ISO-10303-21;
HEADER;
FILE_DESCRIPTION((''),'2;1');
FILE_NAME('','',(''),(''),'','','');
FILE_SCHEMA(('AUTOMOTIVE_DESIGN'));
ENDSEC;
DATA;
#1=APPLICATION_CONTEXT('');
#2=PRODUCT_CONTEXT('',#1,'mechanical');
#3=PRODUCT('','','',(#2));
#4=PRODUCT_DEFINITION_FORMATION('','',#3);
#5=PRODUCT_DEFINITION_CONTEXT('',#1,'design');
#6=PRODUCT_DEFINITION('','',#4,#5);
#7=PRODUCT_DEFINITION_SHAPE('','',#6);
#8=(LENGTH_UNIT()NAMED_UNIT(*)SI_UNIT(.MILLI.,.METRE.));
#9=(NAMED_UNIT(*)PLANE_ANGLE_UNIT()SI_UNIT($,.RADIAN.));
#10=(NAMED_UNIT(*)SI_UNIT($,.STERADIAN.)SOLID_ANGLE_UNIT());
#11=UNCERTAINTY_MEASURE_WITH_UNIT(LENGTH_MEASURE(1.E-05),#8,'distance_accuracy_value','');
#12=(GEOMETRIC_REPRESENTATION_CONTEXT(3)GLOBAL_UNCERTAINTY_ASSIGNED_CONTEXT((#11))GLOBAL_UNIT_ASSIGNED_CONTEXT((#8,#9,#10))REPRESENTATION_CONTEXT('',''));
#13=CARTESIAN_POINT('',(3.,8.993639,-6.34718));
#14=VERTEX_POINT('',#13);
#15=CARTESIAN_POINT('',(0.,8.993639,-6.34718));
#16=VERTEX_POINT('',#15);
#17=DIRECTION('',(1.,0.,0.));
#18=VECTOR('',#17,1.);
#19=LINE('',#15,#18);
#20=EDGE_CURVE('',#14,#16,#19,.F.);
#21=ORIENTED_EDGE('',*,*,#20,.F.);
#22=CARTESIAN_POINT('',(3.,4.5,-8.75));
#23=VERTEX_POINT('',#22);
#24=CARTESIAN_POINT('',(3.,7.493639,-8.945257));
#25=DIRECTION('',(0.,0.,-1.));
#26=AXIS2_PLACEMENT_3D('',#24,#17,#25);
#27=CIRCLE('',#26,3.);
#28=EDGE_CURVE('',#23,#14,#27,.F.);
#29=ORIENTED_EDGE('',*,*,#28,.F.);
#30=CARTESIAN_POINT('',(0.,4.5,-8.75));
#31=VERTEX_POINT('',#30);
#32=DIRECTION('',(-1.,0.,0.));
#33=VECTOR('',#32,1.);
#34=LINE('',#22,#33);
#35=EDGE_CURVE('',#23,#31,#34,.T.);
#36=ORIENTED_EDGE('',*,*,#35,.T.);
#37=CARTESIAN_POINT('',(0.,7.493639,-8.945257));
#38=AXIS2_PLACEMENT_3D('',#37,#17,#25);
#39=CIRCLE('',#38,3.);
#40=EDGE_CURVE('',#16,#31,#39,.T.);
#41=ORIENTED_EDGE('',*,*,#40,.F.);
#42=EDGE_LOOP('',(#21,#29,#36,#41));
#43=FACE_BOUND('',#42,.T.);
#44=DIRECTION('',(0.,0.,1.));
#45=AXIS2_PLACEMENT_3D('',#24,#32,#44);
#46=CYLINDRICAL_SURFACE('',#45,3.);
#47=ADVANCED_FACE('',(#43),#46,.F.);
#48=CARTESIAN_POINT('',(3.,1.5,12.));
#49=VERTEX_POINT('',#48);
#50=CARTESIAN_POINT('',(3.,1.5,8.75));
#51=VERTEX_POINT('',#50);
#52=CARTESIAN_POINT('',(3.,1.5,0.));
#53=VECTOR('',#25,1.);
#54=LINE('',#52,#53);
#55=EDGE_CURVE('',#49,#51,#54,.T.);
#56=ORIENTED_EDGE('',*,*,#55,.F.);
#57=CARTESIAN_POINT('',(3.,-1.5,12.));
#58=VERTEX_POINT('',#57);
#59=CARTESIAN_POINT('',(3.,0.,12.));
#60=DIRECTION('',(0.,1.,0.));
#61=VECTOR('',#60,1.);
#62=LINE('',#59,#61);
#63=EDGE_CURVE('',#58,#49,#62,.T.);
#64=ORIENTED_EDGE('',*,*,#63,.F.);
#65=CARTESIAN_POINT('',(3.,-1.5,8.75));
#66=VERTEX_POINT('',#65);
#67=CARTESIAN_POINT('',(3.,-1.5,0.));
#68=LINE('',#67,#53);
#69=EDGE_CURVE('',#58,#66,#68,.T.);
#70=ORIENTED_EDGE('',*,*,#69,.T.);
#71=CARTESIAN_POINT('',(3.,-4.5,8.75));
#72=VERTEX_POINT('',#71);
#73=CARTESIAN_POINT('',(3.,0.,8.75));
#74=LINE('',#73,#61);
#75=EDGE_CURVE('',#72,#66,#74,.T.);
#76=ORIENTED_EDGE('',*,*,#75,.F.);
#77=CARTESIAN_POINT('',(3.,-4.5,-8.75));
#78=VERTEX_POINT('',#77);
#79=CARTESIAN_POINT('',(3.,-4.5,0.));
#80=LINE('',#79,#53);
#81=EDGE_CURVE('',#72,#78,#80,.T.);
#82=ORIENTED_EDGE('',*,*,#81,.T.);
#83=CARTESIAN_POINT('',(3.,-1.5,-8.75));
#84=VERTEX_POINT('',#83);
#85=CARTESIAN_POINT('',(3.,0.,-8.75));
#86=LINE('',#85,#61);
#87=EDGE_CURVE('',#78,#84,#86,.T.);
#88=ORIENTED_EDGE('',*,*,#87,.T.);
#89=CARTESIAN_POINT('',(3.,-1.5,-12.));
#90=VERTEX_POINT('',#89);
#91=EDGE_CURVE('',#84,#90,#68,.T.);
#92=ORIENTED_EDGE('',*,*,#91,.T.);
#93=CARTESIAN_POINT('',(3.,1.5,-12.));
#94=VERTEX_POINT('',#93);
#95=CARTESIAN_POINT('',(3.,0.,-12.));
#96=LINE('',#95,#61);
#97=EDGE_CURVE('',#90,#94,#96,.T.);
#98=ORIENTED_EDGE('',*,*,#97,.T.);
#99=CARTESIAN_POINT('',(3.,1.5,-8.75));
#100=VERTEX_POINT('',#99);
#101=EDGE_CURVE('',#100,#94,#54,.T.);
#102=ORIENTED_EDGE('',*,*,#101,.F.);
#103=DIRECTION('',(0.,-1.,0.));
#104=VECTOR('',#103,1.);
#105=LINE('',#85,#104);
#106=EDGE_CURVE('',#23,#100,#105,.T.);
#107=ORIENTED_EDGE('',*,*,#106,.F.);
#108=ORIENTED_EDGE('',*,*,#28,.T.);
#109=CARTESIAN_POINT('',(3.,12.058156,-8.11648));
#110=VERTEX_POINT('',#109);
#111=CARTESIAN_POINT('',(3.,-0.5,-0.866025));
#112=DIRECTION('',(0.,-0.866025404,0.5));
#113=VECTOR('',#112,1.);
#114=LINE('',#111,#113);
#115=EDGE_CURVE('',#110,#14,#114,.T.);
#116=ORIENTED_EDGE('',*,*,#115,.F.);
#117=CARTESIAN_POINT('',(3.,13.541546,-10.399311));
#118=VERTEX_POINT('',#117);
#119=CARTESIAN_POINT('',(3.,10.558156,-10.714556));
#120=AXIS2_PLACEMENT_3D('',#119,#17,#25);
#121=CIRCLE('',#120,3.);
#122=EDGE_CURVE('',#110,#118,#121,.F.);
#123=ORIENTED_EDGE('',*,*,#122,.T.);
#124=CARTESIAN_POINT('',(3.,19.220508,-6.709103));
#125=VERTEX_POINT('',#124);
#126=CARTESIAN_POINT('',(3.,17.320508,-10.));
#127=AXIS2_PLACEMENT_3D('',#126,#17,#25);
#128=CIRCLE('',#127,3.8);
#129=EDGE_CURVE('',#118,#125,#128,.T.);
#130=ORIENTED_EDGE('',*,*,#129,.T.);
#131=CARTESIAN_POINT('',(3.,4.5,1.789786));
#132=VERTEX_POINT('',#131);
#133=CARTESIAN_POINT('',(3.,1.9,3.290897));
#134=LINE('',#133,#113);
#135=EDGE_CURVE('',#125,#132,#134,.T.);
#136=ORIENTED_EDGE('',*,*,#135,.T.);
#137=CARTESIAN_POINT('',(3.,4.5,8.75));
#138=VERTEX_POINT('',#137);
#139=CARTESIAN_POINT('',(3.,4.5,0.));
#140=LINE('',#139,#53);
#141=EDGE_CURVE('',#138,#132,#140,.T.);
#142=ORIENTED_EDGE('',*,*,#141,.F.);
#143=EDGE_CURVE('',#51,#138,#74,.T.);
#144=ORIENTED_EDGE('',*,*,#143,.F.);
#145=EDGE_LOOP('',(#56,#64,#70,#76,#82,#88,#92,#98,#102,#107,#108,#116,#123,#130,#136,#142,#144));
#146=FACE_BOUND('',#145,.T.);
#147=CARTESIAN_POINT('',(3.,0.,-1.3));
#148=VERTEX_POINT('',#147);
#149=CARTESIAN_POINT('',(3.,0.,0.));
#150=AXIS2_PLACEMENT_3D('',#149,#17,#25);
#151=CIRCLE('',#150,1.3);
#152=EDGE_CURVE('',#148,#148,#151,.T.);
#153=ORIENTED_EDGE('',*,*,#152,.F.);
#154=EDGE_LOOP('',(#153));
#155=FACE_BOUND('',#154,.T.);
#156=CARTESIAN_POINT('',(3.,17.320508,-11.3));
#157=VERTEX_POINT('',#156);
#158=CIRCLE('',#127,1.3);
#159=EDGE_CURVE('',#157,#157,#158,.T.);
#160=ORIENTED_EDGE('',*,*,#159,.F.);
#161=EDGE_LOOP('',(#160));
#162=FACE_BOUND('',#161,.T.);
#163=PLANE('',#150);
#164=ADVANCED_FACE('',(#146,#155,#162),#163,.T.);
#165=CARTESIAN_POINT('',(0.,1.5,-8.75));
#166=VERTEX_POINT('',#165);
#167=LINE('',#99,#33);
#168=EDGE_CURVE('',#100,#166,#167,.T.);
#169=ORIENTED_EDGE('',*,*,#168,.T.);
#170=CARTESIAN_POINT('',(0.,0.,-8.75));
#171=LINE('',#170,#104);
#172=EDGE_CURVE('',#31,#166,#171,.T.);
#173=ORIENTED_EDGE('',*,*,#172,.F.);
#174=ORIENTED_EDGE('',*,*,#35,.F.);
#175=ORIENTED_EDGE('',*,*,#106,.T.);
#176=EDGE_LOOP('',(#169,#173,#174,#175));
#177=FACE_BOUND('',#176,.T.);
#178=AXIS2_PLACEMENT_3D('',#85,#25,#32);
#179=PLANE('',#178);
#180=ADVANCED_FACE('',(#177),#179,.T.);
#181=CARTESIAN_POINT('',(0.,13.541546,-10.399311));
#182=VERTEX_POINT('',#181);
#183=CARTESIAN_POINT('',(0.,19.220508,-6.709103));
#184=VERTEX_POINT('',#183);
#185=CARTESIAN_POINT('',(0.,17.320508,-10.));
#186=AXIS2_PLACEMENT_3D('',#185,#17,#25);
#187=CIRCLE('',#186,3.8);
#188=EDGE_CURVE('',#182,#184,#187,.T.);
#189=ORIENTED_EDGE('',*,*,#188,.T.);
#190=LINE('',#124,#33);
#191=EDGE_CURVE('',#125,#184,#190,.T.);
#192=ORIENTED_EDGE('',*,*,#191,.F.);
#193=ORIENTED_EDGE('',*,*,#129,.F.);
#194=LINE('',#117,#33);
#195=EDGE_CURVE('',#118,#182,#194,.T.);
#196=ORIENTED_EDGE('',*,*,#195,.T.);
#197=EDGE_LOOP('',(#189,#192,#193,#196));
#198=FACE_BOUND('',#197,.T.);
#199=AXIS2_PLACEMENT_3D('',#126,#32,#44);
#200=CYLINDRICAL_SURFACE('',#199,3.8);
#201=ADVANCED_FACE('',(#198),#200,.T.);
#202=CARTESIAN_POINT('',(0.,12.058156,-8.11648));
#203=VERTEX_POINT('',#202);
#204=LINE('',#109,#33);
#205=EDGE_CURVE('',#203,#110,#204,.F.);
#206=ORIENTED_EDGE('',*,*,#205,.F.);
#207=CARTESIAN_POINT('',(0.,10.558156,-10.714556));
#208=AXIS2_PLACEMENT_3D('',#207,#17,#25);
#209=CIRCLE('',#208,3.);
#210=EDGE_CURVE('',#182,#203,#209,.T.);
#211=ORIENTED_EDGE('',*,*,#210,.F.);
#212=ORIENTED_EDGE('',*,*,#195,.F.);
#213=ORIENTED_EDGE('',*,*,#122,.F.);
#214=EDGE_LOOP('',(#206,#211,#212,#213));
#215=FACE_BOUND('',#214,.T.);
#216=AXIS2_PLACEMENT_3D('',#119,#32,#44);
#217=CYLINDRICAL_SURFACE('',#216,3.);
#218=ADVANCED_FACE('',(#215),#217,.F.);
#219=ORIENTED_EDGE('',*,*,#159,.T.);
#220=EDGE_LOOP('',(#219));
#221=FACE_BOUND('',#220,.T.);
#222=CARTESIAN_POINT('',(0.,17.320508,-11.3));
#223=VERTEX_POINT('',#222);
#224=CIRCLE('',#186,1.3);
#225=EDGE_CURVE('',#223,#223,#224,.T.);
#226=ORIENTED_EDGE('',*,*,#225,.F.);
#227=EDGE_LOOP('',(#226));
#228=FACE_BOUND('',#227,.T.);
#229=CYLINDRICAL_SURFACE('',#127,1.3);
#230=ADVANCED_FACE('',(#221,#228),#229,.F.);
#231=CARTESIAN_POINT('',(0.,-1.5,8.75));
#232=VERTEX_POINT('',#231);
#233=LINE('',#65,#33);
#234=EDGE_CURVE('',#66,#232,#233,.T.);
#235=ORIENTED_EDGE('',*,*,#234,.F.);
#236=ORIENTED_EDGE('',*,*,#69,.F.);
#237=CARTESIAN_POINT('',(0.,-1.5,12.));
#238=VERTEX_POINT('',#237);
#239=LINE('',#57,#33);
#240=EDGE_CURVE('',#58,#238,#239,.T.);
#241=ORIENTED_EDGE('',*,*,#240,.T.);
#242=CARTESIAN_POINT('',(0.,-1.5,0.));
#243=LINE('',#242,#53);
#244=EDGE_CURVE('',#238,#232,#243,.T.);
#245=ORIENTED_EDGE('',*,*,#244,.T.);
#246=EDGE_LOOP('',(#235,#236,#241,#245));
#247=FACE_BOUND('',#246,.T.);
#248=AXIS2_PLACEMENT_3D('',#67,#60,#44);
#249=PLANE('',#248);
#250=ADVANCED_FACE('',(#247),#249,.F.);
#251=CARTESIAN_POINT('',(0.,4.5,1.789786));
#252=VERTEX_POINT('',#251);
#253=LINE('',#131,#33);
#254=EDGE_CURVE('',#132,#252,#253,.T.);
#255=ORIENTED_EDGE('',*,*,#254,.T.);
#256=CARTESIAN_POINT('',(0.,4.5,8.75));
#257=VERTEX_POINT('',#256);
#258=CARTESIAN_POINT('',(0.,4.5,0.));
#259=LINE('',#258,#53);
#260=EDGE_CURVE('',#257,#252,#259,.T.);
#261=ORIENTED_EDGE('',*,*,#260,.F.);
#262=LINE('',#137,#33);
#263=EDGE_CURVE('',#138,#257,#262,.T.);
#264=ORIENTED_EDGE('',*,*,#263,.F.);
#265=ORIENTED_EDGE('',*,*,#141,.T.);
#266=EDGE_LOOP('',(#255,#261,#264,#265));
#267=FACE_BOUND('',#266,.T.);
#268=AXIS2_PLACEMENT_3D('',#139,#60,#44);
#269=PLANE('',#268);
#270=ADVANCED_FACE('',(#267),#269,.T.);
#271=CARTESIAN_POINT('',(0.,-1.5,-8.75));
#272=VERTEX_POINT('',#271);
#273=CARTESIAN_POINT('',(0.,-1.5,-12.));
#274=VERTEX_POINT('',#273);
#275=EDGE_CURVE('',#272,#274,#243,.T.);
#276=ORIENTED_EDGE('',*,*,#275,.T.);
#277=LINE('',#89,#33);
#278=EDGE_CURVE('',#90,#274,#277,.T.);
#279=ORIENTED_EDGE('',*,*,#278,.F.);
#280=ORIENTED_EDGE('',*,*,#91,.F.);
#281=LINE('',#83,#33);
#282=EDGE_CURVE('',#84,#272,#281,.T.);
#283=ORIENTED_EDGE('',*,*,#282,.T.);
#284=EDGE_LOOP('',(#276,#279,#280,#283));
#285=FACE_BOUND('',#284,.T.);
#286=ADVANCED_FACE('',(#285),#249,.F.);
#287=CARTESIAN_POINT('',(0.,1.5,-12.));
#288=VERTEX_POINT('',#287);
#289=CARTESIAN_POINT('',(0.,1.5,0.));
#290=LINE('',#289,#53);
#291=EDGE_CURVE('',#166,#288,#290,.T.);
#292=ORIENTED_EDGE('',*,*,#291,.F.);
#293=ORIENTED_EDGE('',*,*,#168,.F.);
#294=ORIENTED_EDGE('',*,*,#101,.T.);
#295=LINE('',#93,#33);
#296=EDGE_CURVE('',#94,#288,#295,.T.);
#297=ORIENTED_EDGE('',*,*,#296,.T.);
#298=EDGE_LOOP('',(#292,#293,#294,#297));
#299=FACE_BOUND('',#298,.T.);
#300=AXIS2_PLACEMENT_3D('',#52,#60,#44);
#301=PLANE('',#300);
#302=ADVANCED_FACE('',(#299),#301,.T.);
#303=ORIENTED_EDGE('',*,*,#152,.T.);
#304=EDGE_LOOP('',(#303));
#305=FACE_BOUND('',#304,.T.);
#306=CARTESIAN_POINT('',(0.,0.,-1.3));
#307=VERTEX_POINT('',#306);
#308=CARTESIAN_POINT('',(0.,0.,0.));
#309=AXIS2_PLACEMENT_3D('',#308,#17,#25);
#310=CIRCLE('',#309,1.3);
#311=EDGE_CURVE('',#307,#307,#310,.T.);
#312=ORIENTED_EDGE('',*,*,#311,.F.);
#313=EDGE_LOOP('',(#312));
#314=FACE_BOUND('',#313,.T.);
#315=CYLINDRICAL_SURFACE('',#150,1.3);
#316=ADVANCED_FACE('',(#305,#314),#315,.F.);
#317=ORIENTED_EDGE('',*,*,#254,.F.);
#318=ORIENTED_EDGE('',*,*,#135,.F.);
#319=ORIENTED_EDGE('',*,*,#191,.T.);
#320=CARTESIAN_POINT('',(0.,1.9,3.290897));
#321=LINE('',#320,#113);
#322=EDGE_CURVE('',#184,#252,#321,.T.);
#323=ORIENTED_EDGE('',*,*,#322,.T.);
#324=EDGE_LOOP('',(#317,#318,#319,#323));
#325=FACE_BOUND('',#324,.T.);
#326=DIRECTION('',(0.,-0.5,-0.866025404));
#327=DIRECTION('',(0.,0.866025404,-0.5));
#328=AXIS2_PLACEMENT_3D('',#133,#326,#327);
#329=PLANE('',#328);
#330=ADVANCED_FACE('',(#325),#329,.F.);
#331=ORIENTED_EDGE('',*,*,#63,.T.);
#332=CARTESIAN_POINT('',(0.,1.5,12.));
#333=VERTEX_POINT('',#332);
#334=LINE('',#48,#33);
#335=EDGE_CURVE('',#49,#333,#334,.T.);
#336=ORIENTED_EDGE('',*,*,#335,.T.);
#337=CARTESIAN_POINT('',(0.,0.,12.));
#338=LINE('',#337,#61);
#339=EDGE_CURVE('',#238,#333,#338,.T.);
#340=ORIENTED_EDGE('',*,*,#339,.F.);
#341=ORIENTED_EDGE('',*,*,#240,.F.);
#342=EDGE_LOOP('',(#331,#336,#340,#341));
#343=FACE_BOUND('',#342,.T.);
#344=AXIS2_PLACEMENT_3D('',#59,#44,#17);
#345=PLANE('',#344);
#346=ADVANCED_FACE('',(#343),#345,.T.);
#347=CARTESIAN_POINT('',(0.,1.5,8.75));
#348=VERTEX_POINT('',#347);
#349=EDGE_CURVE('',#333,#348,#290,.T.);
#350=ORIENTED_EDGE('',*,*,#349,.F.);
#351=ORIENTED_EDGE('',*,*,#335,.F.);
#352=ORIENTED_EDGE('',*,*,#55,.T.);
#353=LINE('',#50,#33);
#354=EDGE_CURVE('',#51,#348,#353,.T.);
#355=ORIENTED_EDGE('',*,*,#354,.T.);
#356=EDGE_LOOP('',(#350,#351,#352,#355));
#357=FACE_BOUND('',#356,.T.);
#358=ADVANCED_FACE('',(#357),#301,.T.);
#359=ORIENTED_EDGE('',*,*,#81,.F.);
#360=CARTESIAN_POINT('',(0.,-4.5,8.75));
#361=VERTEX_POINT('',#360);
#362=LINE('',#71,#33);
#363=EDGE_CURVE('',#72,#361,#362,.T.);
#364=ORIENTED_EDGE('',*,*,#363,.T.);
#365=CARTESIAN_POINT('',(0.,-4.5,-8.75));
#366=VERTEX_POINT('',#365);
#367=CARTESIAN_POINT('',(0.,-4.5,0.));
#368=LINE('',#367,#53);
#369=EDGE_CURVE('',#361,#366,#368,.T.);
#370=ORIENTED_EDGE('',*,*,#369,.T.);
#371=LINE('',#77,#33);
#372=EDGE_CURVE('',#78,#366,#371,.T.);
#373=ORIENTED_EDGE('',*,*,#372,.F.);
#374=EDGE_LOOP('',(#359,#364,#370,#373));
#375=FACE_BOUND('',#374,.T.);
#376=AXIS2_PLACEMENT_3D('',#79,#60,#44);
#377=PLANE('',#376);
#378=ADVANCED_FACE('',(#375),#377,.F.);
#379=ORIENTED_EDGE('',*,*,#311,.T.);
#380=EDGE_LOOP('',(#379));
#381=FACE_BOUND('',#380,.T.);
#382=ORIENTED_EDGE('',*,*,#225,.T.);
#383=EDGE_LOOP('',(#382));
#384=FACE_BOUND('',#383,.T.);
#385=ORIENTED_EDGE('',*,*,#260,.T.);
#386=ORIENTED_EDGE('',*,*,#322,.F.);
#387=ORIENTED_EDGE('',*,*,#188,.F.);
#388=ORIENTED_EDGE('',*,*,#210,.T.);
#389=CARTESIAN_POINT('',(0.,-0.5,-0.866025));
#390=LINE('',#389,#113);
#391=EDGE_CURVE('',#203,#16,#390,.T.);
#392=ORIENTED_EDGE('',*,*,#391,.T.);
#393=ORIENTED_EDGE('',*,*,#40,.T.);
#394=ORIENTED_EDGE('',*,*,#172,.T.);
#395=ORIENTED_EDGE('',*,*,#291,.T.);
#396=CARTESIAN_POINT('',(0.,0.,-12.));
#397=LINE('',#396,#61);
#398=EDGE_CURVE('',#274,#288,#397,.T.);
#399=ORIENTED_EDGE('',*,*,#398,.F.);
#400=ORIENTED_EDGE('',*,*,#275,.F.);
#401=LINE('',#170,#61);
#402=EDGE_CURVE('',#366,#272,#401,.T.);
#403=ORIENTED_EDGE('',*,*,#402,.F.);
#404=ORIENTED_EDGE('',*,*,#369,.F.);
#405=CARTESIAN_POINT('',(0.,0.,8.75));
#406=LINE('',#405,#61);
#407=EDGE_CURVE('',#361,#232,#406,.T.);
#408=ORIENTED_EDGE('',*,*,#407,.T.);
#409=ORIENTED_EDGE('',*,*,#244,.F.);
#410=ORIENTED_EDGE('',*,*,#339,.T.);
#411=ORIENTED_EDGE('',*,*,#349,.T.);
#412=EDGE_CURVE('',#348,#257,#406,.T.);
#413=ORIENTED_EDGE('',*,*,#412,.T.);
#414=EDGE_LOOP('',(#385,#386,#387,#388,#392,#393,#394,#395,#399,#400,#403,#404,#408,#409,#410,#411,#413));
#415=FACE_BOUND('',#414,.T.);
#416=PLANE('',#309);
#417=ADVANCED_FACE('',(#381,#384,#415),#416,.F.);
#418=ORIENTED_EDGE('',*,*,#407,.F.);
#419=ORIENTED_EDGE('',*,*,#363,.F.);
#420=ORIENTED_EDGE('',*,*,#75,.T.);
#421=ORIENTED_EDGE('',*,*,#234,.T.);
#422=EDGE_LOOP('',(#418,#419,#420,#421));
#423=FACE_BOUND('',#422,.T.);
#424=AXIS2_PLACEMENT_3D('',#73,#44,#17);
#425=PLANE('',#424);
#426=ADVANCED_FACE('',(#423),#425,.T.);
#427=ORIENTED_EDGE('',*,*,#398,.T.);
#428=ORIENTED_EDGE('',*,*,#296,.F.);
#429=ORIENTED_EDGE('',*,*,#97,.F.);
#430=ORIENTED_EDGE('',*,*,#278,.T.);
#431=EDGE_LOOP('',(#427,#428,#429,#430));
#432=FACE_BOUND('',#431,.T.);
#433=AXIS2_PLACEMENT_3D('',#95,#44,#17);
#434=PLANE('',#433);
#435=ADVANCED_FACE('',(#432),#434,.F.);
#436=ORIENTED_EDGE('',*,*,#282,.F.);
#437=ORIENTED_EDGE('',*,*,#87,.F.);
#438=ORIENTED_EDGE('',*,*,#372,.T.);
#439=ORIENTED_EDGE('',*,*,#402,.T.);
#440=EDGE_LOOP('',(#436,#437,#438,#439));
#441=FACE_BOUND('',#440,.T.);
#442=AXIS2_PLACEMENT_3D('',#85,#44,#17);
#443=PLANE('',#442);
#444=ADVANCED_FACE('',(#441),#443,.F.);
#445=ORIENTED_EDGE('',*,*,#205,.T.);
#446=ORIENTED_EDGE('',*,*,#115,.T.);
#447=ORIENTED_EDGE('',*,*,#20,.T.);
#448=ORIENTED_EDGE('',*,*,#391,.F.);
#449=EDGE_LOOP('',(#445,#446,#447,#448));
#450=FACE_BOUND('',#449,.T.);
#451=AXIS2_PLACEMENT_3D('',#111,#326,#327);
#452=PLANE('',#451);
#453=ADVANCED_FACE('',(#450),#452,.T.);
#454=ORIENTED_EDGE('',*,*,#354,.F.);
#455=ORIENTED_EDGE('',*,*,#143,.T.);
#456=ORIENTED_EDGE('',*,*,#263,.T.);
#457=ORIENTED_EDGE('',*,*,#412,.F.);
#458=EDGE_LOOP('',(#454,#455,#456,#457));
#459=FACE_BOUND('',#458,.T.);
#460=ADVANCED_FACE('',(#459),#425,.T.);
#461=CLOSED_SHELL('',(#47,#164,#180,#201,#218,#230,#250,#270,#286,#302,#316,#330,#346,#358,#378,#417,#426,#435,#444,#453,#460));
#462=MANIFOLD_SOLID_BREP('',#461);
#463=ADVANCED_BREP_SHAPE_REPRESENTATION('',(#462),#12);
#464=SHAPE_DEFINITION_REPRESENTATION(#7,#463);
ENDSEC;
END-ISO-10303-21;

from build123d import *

# Parameters (mm, degrees)
BASE_DEPTH                   = 3
FURO_DE_DI_METRO_2_6_2_6_1_D = 2.6
FILETE1_R                    = 3


with BuildPart() as part:
    # Principal → Base (new body)
    with BuildSketch(Plane(origin=(0, 0, 0), x_dir=(0, 0, -1), z_dir=(1, 0, 0))):
        with BuildLine():
            Line((-12, 1.5), (-12, -1.5))
            Line((-12, -1.5), (-8.75, -1.5))
            Line((-8.75, -1.5), (-8.75, -4.5))
            Line((-8.75, -4.5), (8.75, -4.5))
            Line((8.75, -4.5), (8.75, -1.5))
            Line((8.75, -1.5), (12, -1.5))
            Line((12, -1.5), (12, 1.5))
            Line((12, 1.5), (8.75, 1.5))
            Line((8.75, 1.5), (8.75, 4.5))
            Line((8.75, 4.5), (3.75277675, 4.5))
            Line((3.75277675, 4.5), (9.032995126, 13.645606502))
            ThreePointArc((9.032995126, 13.645606502), (13.507465323, 18.782591182), (6.709103466, 19.220508076))
            Line((6.709103466, 19.220508076), (-1.789785834, 4.5))
            Line((-1.789785834, 4.5), (-8.75, 4.5))
            Line((-8.75, 4.5), (-8.75, 1.5))
            Line((-8.75, 1.5), (-12, 1.5))
        make_face()
    extrude(amount=BASE_DEPTH)

    # Furo de diâmetro Ø2.6 (2.6)1 (through all)
    with Locations(Plane(origin=(3, 0, 0), x_dir=(0, 0, -1), z_dir=(1, 0, 0))):
        with Locations((0, 0), (10, 17.320508076)):
            Hole(FURO_DE_DI_METRO_2_6_2_6_1_D / 2)

    # Filete1
    # the kernel refuses this fillet: 3 mm, written as the material it adds along each edge
    with BuildSketch(Plane(origin=(0, 4.5, -3.75277675), x_dir=(0, 0.8660254037844399, -0.49999999999999784), z_dir=(1, 0, 0))) as filete1_piece_1:
        with BuildLine():
            CenterArc((5.188807443, -3), FILETE1_R, 90, 116.268234178)
            Line((2.498611625, -4.327722283), (2.444807709, -4.354276729))
            ThreePointArc((2.444807709, -4.354276729), (1.197344288, -2.193861142), (-0.051961524, -0.03))
            Line((-0.051961524, -0.03), (0, 0.06))
            Line((0, 0.06), (5.188807443, 0.06))
            Line((5.188807443, 0.06), (5.188807443, 0))
        make_face()
    extrude(amount=3)
    with BuildSketch(Plane(origin=(0, 13.645606502, -9.032995126), x_dir=(0, -0.07594112145280421, -0.9971123036411147), z_dir=(1, 0, 0))) as filete1_piece_2:
        with BuildLine():
            CenterArc((1.91116971, -2.950835533), FILETE1_R, 100.387177891, 53.968120928)
            Line((-0.793315729, -1.652467898), (-0.847405437, -1.626500546))
            Line((-0.847405437, -1.626500546), (-0.054089709, 0.025967353))
            Line((-0.054089709, 0.025967353), (0.010817942, 0.059016711))
            ThreePointArc((0.010817942, 0.059016711), (0.685136311, -0.002274992), (1.35945468, 0.059016711))
            Line((1.35945468, 0.059016711), (1.370272622, 0))
        make_face()
    extrude(amount=3)


solid = part.part
